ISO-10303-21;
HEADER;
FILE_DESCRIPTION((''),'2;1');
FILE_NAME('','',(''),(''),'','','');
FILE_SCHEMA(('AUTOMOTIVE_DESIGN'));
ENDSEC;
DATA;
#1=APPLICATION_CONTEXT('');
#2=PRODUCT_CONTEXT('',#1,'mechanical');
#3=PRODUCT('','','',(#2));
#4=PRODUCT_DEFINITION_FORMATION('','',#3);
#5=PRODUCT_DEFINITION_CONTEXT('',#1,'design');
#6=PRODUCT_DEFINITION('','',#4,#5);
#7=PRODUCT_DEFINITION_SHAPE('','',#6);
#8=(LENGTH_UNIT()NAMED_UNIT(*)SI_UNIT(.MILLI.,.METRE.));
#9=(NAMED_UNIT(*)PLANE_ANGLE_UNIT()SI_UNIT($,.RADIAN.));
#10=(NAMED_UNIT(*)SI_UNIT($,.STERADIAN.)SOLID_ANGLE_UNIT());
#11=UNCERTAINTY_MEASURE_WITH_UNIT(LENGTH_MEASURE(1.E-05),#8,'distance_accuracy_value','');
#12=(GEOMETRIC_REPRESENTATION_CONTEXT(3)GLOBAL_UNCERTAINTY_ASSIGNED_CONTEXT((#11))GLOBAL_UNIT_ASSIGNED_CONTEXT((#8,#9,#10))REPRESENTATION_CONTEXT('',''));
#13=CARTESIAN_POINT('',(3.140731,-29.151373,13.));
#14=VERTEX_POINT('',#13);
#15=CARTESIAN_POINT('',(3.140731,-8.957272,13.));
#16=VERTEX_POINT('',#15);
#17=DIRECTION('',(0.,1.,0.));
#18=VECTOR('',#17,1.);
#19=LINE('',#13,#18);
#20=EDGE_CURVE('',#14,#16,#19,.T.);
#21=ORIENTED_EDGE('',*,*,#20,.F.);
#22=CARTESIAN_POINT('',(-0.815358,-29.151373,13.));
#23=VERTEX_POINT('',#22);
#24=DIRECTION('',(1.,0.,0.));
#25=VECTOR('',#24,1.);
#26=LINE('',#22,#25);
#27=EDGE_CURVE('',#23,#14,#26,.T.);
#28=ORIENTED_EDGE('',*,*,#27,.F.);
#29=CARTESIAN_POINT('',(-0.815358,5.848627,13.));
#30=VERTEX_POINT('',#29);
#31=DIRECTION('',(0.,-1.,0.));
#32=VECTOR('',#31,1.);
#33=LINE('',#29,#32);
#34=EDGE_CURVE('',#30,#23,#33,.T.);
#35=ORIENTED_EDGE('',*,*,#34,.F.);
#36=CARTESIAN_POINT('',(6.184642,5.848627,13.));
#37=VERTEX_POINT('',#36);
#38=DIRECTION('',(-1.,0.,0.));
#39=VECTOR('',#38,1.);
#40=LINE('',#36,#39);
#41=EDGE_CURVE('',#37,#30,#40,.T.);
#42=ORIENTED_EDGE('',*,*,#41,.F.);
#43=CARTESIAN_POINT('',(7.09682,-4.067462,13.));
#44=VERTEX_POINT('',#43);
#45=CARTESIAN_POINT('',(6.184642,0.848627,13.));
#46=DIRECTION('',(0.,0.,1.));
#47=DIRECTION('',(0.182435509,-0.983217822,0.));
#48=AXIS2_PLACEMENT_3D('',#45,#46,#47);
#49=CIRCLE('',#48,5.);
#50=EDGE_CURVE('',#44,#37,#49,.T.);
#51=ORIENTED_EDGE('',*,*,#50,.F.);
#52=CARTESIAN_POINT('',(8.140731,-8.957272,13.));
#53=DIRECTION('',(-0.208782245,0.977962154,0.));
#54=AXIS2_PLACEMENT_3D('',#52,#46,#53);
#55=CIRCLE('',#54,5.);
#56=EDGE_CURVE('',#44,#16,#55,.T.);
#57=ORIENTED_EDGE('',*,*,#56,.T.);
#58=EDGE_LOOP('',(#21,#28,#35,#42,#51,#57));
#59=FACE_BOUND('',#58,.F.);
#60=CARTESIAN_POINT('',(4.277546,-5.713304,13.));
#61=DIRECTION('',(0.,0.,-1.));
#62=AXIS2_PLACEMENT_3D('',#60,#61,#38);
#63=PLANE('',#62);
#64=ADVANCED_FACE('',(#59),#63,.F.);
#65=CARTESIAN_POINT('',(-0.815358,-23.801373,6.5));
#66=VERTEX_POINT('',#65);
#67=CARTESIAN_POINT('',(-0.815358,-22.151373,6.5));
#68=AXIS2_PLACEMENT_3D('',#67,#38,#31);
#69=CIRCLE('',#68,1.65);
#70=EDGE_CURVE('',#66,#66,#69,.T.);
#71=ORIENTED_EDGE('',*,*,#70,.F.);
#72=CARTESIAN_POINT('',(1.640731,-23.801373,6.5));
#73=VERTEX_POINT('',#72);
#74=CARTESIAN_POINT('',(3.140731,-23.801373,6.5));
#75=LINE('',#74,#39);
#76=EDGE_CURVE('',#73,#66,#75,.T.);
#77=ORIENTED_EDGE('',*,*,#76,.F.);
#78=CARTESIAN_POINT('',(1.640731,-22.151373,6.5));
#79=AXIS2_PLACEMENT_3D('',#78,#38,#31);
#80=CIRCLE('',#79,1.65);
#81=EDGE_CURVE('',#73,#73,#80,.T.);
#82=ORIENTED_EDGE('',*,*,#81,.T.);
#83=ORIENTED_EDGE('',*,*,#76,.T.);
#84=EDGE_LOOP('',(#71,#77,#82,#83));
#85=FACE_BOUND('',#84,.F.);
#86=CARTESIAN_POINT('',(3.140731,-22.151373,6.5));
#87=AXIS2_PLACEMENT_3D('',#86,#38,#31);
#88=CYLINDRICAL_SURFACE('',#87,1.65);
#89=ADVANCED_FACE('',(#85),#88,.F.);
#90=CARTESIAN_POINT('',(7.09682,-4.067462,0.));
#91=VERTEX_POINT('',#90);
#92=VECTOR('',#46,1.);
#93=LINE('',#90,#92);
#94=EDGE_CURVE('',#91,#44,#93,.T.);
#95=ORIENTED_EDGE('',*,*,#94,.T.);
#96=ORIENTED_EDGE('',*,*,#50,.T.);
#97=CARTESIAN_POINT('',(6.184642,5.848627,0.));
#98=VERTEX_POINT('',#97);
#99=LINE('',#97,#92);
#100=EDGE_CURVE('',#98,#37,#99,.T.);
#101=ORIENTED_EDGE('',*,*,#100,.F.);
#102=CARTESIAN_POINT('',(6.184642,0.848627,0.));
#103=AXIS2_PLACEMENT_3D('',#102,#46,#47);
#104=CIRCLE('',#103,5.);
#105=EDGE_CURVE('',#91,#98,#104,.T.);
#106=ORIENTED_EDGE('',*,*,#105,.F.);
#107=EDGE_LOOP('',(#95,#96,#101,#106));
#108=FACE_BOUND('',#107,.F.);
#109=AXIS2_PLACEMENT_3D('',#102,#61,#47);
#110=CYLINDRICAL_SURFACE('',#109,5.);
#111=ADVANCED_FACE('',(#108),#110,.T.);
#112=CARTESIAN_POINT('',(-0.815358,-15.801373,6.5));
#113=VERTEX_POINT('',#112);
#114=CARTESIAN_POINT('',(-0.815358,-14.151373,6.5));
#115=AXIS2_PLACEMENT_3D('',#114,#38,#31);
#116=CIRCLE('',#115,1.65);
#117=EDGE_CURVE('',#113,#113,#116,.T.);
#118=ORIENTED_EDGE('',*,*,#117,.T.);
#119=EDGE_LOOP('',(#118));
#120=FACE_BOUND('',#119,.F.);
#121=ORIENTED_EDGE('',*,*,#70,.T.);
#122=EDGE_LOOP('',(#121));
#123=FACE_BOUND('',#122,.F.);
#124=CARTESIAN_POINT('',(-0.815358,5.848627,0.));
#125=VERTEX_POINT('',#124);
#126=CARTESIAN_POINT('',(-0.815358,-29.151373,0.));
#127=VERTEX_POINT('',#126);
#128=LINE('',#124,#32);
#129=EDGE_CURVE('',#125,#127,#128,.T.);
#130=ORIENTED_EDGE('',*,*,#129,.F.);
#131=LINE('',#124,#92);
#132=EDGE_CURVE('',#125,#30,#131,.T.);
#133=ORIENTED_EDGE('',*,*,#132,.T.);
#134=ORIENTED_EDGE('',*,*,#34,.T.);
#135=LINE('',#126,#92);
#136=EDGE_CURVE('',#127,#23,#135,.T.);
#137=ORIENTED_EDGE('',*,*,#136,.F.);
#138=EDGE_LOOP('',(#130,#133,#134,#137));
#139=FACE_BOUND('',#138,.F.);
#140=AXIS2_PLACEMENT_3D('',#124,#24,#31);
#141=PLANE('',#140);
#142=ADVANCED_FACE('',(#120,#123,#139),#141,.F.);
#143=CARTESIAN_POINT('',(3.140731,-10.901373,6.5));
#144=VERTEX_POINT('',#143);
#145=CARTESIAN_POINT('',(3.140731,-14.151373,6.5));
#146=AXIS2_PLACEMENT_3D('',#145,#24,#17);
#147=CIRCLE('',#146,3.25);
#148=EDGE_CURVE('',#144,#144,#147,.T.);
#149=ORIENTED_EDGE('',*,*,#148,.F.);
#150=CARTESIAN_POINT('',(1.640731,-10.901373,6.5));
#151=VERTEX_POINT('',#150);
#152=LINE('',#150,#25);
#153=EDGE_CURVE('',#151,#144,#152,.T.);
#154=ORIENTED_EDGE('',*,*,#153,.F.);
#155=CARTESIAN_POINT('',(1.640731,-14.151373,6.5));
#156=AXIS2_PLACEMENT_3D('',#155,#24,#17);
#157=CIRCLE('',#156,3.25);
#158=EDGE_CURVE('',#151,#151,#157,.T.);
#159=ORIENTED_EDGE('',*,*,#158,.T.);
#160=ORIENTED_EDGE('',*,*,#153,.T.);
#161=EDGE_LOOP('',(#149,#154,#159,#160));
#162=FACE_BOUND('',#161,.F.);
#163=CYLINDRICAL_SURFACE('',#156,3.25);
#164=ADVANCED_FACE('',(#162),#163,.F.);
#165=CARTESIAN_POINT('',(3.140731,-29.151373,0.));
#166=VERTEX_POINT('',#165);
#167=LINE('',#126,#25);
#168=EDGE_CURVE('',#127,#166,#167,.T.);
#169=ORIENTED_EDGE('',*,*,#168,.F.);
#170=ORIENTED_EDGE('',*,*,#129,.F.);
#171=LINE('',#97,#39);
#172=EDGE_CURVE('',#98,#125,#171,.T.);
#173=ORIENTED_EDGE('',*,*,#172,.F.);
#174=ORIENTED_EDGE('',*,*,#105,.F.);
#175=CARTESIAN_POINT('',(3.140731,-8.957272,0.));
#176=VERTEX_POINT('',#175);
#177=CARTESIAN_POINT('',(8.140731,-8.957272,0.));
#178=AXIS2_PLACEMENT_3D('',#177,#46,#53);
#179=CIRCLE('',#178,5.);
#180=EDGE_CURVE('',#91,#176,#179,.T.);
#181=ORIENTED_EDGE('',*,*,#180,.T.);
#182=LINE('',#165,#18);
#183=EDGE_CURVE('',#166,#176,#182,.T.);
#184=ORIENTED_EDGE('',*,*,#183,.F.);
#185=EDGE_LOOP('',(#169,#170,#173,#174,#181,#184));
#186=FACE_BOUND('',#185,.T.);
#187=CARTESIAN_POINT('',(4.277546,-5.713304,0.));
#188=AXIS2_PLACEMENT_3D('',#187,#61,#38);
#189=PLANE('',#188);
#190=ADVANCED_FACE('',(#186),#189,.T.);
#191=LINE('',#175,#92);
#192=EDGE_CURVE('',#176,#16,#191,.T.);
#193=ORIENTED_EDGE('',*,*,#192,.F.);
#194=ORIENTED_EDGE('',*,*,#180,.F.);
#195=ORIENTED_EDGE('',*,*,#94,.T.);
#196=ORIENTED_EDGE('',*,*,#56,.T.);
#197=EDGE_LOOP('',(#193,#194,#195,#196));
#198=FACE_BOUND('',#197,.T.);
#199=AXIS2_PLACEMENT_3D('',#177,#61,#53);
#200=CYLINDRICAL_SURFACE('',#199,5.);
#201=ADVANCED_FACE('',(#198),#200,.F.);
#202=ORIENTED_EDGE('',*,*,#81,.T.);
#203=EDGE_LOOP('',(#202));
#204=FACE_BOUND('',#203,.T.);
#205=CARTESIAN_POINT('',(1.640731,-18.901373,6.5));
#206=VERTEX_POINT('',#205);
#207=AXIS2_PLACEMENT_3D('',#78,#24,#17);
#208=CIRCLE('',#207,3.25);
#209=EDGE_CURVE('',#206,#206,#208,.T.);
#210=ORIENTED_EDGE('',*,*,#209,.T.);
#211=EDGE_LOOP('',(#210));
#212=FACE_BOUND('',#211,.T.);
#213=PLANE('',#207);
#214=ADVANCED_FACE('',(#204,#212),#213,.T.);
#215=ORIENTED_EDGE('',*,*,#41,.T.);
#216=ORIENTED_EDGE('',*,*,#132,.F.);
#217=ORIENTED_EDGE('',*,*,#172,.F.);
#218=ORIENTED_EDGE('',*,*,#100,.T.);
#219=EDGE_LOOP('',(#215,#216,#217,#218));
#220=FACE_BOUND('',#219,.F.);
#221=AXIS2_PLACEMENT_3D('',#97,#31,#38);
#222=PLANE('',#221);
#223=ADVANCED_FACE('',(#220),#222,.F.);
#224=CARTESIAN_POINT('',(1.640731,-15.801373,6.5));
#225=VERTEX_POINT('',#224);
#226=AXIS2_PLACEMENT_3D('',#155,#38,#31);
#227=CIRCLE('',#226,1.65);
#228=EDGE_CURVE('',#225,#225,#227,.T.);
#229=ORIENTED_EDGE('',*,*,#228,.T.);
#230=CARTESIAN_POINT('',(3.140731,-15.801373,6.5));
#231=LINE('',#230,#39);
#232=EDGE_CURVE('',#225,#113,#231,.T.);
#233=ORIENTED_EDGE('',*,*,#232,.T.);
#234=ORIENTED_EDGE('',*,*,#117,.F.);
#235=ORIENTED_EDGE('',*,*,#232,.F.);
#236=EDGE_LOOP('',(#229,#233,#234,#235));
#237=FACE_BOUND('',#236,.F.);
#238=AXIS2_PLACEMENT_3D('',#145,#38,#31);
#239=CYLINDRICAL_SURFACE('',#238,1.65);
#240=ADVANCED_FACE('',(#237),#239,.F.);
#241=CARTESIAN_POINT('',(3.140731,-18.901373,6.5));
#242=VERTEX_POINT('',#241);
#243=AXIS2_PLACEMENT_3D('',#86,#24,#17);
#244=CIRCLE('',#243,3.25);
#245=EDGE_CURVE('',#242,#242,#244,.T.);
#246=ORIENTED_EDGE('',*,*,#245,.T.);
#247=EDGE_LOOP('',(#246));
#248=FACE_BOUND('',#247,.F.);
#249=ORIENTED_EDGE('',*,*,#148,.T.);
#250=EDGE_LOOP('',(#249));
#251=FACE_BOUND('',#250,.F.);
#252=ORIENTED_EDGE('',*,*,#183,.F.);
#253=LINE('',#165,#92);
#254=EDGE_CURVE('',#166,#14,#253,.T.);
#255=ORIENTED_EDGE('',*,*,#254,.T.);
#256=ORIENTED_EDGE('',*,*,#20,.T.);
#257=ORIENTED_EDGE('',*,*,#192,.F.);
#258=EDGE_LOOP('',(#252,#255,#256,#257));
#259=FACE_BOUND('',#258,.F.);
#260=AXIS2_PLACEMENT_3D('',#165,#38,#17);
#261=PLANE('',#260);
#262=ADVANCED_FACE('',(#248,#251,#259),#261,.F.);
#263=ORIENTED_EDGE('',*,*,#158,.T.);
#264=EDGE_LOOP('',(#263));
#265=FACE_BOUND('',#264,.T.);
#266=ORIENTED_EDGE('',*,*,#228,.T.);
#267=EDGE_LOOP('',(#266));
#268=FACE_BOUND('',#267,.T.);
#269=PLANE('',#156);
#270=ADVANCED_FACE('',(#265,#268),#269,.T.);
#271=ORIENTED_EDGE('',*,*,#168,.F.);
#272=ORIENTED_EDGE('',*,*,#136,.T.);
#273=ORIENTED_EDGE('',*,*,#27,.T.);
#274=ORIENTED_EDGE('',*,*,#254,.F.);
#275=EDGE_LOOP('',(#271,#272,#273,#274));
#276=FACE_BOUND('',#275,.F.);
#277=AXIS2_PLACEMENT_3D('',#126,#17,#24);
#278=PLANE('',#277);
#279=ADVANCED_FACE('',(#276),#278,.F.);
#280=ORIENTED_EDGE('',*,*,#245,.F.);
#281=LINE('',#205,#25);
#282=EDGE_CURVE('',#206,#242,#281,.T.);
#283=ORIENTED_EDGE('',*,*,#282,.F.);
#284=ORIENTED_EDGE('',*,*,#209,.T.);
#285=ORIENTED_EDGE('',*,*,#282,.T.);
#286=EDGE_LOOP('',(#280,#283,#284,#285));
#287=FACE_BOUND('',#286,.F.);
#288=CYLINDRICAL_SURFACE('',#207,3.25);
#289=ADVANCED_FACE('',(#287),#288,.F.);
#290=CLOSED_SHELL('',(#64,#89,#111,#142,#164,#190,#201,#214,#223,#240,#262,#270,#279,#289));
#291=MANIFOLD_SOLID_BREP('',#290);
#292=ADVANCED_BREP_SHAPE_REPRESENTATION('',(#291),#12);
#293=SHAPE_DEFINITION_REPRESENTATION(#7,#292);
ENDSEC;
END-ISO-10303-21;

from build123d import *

# Parameters (mm, degrees)
F1_DEPTH       = 13
F2_T1_DEPTH    = 13
F4_D           = 3.3
F4_CBORE_D     = 6.5
F4_CBORE_DEPTH = 1.5


# Not quite as in the source:
# - a fillet or chamfer that OpenCascade refuses, or shapes differently, is made with other operations: its cross-section is extruded or revolved along the edge and cut away or added


with BuildPart() as f1:
    # F0 (on Top) → F1 (new body)
    with BuildSketch(Plane.XY):
        with BuildLine():
            Line((6.184642151, 5.8486273885), (-0.815357849, 5.8486273885))
            Line((-0.815357849, 5.8486273885), (-0.815357849, -29.1513726115))
            Line((-0.815357849, -29.1513726115), (3.1407309243, -29.1513726115))
            Line((3.1407309243, -29.1513726115), (3.1407309243, -4.0674617201))
            Line((3.1407309243, -4.0674617201), (7.0968196975, -4.0674617201))
            ThreePointArc((7.0968196975, -4.0674617201), (11.1636202361, 1.3066418299), (6.184642151, 5.8486273885))
        make_face()
    extrude(amount=F1_DEPTH)

    # F2: fillet of radius 5 on 1 edges, made by hand

    # F2_s2 → F2_t1 (join)
    with BuildSketch(Plane.XY):
        with BuildLine():
            ThreePointArc((7.0968196975, -4.0674617201), (4.2536011262, -5.8124001647), (3.1407309243, -8.9572724885))
            Line((3.1407309243, -8.9572724885), (3.1407309243, -4.0674617201))
            Line((3.1407309243, -4.0674617201), (7.0968196975, -4.0674617201))
        make_face()
    extrude(amount=F2_T1_DEPTH)

    # F4 (through all)
    with Locations(Plane.YZ.offset(3.1407309243)):
        with Locations((-22.1513726115, 6.5), (-14.1513726115, 6.5)):
            CounterBoreHole(F4_D / 2, F4_CBORE_D / 2, F4_CBORE_DEPTH)


solid = f1.part
